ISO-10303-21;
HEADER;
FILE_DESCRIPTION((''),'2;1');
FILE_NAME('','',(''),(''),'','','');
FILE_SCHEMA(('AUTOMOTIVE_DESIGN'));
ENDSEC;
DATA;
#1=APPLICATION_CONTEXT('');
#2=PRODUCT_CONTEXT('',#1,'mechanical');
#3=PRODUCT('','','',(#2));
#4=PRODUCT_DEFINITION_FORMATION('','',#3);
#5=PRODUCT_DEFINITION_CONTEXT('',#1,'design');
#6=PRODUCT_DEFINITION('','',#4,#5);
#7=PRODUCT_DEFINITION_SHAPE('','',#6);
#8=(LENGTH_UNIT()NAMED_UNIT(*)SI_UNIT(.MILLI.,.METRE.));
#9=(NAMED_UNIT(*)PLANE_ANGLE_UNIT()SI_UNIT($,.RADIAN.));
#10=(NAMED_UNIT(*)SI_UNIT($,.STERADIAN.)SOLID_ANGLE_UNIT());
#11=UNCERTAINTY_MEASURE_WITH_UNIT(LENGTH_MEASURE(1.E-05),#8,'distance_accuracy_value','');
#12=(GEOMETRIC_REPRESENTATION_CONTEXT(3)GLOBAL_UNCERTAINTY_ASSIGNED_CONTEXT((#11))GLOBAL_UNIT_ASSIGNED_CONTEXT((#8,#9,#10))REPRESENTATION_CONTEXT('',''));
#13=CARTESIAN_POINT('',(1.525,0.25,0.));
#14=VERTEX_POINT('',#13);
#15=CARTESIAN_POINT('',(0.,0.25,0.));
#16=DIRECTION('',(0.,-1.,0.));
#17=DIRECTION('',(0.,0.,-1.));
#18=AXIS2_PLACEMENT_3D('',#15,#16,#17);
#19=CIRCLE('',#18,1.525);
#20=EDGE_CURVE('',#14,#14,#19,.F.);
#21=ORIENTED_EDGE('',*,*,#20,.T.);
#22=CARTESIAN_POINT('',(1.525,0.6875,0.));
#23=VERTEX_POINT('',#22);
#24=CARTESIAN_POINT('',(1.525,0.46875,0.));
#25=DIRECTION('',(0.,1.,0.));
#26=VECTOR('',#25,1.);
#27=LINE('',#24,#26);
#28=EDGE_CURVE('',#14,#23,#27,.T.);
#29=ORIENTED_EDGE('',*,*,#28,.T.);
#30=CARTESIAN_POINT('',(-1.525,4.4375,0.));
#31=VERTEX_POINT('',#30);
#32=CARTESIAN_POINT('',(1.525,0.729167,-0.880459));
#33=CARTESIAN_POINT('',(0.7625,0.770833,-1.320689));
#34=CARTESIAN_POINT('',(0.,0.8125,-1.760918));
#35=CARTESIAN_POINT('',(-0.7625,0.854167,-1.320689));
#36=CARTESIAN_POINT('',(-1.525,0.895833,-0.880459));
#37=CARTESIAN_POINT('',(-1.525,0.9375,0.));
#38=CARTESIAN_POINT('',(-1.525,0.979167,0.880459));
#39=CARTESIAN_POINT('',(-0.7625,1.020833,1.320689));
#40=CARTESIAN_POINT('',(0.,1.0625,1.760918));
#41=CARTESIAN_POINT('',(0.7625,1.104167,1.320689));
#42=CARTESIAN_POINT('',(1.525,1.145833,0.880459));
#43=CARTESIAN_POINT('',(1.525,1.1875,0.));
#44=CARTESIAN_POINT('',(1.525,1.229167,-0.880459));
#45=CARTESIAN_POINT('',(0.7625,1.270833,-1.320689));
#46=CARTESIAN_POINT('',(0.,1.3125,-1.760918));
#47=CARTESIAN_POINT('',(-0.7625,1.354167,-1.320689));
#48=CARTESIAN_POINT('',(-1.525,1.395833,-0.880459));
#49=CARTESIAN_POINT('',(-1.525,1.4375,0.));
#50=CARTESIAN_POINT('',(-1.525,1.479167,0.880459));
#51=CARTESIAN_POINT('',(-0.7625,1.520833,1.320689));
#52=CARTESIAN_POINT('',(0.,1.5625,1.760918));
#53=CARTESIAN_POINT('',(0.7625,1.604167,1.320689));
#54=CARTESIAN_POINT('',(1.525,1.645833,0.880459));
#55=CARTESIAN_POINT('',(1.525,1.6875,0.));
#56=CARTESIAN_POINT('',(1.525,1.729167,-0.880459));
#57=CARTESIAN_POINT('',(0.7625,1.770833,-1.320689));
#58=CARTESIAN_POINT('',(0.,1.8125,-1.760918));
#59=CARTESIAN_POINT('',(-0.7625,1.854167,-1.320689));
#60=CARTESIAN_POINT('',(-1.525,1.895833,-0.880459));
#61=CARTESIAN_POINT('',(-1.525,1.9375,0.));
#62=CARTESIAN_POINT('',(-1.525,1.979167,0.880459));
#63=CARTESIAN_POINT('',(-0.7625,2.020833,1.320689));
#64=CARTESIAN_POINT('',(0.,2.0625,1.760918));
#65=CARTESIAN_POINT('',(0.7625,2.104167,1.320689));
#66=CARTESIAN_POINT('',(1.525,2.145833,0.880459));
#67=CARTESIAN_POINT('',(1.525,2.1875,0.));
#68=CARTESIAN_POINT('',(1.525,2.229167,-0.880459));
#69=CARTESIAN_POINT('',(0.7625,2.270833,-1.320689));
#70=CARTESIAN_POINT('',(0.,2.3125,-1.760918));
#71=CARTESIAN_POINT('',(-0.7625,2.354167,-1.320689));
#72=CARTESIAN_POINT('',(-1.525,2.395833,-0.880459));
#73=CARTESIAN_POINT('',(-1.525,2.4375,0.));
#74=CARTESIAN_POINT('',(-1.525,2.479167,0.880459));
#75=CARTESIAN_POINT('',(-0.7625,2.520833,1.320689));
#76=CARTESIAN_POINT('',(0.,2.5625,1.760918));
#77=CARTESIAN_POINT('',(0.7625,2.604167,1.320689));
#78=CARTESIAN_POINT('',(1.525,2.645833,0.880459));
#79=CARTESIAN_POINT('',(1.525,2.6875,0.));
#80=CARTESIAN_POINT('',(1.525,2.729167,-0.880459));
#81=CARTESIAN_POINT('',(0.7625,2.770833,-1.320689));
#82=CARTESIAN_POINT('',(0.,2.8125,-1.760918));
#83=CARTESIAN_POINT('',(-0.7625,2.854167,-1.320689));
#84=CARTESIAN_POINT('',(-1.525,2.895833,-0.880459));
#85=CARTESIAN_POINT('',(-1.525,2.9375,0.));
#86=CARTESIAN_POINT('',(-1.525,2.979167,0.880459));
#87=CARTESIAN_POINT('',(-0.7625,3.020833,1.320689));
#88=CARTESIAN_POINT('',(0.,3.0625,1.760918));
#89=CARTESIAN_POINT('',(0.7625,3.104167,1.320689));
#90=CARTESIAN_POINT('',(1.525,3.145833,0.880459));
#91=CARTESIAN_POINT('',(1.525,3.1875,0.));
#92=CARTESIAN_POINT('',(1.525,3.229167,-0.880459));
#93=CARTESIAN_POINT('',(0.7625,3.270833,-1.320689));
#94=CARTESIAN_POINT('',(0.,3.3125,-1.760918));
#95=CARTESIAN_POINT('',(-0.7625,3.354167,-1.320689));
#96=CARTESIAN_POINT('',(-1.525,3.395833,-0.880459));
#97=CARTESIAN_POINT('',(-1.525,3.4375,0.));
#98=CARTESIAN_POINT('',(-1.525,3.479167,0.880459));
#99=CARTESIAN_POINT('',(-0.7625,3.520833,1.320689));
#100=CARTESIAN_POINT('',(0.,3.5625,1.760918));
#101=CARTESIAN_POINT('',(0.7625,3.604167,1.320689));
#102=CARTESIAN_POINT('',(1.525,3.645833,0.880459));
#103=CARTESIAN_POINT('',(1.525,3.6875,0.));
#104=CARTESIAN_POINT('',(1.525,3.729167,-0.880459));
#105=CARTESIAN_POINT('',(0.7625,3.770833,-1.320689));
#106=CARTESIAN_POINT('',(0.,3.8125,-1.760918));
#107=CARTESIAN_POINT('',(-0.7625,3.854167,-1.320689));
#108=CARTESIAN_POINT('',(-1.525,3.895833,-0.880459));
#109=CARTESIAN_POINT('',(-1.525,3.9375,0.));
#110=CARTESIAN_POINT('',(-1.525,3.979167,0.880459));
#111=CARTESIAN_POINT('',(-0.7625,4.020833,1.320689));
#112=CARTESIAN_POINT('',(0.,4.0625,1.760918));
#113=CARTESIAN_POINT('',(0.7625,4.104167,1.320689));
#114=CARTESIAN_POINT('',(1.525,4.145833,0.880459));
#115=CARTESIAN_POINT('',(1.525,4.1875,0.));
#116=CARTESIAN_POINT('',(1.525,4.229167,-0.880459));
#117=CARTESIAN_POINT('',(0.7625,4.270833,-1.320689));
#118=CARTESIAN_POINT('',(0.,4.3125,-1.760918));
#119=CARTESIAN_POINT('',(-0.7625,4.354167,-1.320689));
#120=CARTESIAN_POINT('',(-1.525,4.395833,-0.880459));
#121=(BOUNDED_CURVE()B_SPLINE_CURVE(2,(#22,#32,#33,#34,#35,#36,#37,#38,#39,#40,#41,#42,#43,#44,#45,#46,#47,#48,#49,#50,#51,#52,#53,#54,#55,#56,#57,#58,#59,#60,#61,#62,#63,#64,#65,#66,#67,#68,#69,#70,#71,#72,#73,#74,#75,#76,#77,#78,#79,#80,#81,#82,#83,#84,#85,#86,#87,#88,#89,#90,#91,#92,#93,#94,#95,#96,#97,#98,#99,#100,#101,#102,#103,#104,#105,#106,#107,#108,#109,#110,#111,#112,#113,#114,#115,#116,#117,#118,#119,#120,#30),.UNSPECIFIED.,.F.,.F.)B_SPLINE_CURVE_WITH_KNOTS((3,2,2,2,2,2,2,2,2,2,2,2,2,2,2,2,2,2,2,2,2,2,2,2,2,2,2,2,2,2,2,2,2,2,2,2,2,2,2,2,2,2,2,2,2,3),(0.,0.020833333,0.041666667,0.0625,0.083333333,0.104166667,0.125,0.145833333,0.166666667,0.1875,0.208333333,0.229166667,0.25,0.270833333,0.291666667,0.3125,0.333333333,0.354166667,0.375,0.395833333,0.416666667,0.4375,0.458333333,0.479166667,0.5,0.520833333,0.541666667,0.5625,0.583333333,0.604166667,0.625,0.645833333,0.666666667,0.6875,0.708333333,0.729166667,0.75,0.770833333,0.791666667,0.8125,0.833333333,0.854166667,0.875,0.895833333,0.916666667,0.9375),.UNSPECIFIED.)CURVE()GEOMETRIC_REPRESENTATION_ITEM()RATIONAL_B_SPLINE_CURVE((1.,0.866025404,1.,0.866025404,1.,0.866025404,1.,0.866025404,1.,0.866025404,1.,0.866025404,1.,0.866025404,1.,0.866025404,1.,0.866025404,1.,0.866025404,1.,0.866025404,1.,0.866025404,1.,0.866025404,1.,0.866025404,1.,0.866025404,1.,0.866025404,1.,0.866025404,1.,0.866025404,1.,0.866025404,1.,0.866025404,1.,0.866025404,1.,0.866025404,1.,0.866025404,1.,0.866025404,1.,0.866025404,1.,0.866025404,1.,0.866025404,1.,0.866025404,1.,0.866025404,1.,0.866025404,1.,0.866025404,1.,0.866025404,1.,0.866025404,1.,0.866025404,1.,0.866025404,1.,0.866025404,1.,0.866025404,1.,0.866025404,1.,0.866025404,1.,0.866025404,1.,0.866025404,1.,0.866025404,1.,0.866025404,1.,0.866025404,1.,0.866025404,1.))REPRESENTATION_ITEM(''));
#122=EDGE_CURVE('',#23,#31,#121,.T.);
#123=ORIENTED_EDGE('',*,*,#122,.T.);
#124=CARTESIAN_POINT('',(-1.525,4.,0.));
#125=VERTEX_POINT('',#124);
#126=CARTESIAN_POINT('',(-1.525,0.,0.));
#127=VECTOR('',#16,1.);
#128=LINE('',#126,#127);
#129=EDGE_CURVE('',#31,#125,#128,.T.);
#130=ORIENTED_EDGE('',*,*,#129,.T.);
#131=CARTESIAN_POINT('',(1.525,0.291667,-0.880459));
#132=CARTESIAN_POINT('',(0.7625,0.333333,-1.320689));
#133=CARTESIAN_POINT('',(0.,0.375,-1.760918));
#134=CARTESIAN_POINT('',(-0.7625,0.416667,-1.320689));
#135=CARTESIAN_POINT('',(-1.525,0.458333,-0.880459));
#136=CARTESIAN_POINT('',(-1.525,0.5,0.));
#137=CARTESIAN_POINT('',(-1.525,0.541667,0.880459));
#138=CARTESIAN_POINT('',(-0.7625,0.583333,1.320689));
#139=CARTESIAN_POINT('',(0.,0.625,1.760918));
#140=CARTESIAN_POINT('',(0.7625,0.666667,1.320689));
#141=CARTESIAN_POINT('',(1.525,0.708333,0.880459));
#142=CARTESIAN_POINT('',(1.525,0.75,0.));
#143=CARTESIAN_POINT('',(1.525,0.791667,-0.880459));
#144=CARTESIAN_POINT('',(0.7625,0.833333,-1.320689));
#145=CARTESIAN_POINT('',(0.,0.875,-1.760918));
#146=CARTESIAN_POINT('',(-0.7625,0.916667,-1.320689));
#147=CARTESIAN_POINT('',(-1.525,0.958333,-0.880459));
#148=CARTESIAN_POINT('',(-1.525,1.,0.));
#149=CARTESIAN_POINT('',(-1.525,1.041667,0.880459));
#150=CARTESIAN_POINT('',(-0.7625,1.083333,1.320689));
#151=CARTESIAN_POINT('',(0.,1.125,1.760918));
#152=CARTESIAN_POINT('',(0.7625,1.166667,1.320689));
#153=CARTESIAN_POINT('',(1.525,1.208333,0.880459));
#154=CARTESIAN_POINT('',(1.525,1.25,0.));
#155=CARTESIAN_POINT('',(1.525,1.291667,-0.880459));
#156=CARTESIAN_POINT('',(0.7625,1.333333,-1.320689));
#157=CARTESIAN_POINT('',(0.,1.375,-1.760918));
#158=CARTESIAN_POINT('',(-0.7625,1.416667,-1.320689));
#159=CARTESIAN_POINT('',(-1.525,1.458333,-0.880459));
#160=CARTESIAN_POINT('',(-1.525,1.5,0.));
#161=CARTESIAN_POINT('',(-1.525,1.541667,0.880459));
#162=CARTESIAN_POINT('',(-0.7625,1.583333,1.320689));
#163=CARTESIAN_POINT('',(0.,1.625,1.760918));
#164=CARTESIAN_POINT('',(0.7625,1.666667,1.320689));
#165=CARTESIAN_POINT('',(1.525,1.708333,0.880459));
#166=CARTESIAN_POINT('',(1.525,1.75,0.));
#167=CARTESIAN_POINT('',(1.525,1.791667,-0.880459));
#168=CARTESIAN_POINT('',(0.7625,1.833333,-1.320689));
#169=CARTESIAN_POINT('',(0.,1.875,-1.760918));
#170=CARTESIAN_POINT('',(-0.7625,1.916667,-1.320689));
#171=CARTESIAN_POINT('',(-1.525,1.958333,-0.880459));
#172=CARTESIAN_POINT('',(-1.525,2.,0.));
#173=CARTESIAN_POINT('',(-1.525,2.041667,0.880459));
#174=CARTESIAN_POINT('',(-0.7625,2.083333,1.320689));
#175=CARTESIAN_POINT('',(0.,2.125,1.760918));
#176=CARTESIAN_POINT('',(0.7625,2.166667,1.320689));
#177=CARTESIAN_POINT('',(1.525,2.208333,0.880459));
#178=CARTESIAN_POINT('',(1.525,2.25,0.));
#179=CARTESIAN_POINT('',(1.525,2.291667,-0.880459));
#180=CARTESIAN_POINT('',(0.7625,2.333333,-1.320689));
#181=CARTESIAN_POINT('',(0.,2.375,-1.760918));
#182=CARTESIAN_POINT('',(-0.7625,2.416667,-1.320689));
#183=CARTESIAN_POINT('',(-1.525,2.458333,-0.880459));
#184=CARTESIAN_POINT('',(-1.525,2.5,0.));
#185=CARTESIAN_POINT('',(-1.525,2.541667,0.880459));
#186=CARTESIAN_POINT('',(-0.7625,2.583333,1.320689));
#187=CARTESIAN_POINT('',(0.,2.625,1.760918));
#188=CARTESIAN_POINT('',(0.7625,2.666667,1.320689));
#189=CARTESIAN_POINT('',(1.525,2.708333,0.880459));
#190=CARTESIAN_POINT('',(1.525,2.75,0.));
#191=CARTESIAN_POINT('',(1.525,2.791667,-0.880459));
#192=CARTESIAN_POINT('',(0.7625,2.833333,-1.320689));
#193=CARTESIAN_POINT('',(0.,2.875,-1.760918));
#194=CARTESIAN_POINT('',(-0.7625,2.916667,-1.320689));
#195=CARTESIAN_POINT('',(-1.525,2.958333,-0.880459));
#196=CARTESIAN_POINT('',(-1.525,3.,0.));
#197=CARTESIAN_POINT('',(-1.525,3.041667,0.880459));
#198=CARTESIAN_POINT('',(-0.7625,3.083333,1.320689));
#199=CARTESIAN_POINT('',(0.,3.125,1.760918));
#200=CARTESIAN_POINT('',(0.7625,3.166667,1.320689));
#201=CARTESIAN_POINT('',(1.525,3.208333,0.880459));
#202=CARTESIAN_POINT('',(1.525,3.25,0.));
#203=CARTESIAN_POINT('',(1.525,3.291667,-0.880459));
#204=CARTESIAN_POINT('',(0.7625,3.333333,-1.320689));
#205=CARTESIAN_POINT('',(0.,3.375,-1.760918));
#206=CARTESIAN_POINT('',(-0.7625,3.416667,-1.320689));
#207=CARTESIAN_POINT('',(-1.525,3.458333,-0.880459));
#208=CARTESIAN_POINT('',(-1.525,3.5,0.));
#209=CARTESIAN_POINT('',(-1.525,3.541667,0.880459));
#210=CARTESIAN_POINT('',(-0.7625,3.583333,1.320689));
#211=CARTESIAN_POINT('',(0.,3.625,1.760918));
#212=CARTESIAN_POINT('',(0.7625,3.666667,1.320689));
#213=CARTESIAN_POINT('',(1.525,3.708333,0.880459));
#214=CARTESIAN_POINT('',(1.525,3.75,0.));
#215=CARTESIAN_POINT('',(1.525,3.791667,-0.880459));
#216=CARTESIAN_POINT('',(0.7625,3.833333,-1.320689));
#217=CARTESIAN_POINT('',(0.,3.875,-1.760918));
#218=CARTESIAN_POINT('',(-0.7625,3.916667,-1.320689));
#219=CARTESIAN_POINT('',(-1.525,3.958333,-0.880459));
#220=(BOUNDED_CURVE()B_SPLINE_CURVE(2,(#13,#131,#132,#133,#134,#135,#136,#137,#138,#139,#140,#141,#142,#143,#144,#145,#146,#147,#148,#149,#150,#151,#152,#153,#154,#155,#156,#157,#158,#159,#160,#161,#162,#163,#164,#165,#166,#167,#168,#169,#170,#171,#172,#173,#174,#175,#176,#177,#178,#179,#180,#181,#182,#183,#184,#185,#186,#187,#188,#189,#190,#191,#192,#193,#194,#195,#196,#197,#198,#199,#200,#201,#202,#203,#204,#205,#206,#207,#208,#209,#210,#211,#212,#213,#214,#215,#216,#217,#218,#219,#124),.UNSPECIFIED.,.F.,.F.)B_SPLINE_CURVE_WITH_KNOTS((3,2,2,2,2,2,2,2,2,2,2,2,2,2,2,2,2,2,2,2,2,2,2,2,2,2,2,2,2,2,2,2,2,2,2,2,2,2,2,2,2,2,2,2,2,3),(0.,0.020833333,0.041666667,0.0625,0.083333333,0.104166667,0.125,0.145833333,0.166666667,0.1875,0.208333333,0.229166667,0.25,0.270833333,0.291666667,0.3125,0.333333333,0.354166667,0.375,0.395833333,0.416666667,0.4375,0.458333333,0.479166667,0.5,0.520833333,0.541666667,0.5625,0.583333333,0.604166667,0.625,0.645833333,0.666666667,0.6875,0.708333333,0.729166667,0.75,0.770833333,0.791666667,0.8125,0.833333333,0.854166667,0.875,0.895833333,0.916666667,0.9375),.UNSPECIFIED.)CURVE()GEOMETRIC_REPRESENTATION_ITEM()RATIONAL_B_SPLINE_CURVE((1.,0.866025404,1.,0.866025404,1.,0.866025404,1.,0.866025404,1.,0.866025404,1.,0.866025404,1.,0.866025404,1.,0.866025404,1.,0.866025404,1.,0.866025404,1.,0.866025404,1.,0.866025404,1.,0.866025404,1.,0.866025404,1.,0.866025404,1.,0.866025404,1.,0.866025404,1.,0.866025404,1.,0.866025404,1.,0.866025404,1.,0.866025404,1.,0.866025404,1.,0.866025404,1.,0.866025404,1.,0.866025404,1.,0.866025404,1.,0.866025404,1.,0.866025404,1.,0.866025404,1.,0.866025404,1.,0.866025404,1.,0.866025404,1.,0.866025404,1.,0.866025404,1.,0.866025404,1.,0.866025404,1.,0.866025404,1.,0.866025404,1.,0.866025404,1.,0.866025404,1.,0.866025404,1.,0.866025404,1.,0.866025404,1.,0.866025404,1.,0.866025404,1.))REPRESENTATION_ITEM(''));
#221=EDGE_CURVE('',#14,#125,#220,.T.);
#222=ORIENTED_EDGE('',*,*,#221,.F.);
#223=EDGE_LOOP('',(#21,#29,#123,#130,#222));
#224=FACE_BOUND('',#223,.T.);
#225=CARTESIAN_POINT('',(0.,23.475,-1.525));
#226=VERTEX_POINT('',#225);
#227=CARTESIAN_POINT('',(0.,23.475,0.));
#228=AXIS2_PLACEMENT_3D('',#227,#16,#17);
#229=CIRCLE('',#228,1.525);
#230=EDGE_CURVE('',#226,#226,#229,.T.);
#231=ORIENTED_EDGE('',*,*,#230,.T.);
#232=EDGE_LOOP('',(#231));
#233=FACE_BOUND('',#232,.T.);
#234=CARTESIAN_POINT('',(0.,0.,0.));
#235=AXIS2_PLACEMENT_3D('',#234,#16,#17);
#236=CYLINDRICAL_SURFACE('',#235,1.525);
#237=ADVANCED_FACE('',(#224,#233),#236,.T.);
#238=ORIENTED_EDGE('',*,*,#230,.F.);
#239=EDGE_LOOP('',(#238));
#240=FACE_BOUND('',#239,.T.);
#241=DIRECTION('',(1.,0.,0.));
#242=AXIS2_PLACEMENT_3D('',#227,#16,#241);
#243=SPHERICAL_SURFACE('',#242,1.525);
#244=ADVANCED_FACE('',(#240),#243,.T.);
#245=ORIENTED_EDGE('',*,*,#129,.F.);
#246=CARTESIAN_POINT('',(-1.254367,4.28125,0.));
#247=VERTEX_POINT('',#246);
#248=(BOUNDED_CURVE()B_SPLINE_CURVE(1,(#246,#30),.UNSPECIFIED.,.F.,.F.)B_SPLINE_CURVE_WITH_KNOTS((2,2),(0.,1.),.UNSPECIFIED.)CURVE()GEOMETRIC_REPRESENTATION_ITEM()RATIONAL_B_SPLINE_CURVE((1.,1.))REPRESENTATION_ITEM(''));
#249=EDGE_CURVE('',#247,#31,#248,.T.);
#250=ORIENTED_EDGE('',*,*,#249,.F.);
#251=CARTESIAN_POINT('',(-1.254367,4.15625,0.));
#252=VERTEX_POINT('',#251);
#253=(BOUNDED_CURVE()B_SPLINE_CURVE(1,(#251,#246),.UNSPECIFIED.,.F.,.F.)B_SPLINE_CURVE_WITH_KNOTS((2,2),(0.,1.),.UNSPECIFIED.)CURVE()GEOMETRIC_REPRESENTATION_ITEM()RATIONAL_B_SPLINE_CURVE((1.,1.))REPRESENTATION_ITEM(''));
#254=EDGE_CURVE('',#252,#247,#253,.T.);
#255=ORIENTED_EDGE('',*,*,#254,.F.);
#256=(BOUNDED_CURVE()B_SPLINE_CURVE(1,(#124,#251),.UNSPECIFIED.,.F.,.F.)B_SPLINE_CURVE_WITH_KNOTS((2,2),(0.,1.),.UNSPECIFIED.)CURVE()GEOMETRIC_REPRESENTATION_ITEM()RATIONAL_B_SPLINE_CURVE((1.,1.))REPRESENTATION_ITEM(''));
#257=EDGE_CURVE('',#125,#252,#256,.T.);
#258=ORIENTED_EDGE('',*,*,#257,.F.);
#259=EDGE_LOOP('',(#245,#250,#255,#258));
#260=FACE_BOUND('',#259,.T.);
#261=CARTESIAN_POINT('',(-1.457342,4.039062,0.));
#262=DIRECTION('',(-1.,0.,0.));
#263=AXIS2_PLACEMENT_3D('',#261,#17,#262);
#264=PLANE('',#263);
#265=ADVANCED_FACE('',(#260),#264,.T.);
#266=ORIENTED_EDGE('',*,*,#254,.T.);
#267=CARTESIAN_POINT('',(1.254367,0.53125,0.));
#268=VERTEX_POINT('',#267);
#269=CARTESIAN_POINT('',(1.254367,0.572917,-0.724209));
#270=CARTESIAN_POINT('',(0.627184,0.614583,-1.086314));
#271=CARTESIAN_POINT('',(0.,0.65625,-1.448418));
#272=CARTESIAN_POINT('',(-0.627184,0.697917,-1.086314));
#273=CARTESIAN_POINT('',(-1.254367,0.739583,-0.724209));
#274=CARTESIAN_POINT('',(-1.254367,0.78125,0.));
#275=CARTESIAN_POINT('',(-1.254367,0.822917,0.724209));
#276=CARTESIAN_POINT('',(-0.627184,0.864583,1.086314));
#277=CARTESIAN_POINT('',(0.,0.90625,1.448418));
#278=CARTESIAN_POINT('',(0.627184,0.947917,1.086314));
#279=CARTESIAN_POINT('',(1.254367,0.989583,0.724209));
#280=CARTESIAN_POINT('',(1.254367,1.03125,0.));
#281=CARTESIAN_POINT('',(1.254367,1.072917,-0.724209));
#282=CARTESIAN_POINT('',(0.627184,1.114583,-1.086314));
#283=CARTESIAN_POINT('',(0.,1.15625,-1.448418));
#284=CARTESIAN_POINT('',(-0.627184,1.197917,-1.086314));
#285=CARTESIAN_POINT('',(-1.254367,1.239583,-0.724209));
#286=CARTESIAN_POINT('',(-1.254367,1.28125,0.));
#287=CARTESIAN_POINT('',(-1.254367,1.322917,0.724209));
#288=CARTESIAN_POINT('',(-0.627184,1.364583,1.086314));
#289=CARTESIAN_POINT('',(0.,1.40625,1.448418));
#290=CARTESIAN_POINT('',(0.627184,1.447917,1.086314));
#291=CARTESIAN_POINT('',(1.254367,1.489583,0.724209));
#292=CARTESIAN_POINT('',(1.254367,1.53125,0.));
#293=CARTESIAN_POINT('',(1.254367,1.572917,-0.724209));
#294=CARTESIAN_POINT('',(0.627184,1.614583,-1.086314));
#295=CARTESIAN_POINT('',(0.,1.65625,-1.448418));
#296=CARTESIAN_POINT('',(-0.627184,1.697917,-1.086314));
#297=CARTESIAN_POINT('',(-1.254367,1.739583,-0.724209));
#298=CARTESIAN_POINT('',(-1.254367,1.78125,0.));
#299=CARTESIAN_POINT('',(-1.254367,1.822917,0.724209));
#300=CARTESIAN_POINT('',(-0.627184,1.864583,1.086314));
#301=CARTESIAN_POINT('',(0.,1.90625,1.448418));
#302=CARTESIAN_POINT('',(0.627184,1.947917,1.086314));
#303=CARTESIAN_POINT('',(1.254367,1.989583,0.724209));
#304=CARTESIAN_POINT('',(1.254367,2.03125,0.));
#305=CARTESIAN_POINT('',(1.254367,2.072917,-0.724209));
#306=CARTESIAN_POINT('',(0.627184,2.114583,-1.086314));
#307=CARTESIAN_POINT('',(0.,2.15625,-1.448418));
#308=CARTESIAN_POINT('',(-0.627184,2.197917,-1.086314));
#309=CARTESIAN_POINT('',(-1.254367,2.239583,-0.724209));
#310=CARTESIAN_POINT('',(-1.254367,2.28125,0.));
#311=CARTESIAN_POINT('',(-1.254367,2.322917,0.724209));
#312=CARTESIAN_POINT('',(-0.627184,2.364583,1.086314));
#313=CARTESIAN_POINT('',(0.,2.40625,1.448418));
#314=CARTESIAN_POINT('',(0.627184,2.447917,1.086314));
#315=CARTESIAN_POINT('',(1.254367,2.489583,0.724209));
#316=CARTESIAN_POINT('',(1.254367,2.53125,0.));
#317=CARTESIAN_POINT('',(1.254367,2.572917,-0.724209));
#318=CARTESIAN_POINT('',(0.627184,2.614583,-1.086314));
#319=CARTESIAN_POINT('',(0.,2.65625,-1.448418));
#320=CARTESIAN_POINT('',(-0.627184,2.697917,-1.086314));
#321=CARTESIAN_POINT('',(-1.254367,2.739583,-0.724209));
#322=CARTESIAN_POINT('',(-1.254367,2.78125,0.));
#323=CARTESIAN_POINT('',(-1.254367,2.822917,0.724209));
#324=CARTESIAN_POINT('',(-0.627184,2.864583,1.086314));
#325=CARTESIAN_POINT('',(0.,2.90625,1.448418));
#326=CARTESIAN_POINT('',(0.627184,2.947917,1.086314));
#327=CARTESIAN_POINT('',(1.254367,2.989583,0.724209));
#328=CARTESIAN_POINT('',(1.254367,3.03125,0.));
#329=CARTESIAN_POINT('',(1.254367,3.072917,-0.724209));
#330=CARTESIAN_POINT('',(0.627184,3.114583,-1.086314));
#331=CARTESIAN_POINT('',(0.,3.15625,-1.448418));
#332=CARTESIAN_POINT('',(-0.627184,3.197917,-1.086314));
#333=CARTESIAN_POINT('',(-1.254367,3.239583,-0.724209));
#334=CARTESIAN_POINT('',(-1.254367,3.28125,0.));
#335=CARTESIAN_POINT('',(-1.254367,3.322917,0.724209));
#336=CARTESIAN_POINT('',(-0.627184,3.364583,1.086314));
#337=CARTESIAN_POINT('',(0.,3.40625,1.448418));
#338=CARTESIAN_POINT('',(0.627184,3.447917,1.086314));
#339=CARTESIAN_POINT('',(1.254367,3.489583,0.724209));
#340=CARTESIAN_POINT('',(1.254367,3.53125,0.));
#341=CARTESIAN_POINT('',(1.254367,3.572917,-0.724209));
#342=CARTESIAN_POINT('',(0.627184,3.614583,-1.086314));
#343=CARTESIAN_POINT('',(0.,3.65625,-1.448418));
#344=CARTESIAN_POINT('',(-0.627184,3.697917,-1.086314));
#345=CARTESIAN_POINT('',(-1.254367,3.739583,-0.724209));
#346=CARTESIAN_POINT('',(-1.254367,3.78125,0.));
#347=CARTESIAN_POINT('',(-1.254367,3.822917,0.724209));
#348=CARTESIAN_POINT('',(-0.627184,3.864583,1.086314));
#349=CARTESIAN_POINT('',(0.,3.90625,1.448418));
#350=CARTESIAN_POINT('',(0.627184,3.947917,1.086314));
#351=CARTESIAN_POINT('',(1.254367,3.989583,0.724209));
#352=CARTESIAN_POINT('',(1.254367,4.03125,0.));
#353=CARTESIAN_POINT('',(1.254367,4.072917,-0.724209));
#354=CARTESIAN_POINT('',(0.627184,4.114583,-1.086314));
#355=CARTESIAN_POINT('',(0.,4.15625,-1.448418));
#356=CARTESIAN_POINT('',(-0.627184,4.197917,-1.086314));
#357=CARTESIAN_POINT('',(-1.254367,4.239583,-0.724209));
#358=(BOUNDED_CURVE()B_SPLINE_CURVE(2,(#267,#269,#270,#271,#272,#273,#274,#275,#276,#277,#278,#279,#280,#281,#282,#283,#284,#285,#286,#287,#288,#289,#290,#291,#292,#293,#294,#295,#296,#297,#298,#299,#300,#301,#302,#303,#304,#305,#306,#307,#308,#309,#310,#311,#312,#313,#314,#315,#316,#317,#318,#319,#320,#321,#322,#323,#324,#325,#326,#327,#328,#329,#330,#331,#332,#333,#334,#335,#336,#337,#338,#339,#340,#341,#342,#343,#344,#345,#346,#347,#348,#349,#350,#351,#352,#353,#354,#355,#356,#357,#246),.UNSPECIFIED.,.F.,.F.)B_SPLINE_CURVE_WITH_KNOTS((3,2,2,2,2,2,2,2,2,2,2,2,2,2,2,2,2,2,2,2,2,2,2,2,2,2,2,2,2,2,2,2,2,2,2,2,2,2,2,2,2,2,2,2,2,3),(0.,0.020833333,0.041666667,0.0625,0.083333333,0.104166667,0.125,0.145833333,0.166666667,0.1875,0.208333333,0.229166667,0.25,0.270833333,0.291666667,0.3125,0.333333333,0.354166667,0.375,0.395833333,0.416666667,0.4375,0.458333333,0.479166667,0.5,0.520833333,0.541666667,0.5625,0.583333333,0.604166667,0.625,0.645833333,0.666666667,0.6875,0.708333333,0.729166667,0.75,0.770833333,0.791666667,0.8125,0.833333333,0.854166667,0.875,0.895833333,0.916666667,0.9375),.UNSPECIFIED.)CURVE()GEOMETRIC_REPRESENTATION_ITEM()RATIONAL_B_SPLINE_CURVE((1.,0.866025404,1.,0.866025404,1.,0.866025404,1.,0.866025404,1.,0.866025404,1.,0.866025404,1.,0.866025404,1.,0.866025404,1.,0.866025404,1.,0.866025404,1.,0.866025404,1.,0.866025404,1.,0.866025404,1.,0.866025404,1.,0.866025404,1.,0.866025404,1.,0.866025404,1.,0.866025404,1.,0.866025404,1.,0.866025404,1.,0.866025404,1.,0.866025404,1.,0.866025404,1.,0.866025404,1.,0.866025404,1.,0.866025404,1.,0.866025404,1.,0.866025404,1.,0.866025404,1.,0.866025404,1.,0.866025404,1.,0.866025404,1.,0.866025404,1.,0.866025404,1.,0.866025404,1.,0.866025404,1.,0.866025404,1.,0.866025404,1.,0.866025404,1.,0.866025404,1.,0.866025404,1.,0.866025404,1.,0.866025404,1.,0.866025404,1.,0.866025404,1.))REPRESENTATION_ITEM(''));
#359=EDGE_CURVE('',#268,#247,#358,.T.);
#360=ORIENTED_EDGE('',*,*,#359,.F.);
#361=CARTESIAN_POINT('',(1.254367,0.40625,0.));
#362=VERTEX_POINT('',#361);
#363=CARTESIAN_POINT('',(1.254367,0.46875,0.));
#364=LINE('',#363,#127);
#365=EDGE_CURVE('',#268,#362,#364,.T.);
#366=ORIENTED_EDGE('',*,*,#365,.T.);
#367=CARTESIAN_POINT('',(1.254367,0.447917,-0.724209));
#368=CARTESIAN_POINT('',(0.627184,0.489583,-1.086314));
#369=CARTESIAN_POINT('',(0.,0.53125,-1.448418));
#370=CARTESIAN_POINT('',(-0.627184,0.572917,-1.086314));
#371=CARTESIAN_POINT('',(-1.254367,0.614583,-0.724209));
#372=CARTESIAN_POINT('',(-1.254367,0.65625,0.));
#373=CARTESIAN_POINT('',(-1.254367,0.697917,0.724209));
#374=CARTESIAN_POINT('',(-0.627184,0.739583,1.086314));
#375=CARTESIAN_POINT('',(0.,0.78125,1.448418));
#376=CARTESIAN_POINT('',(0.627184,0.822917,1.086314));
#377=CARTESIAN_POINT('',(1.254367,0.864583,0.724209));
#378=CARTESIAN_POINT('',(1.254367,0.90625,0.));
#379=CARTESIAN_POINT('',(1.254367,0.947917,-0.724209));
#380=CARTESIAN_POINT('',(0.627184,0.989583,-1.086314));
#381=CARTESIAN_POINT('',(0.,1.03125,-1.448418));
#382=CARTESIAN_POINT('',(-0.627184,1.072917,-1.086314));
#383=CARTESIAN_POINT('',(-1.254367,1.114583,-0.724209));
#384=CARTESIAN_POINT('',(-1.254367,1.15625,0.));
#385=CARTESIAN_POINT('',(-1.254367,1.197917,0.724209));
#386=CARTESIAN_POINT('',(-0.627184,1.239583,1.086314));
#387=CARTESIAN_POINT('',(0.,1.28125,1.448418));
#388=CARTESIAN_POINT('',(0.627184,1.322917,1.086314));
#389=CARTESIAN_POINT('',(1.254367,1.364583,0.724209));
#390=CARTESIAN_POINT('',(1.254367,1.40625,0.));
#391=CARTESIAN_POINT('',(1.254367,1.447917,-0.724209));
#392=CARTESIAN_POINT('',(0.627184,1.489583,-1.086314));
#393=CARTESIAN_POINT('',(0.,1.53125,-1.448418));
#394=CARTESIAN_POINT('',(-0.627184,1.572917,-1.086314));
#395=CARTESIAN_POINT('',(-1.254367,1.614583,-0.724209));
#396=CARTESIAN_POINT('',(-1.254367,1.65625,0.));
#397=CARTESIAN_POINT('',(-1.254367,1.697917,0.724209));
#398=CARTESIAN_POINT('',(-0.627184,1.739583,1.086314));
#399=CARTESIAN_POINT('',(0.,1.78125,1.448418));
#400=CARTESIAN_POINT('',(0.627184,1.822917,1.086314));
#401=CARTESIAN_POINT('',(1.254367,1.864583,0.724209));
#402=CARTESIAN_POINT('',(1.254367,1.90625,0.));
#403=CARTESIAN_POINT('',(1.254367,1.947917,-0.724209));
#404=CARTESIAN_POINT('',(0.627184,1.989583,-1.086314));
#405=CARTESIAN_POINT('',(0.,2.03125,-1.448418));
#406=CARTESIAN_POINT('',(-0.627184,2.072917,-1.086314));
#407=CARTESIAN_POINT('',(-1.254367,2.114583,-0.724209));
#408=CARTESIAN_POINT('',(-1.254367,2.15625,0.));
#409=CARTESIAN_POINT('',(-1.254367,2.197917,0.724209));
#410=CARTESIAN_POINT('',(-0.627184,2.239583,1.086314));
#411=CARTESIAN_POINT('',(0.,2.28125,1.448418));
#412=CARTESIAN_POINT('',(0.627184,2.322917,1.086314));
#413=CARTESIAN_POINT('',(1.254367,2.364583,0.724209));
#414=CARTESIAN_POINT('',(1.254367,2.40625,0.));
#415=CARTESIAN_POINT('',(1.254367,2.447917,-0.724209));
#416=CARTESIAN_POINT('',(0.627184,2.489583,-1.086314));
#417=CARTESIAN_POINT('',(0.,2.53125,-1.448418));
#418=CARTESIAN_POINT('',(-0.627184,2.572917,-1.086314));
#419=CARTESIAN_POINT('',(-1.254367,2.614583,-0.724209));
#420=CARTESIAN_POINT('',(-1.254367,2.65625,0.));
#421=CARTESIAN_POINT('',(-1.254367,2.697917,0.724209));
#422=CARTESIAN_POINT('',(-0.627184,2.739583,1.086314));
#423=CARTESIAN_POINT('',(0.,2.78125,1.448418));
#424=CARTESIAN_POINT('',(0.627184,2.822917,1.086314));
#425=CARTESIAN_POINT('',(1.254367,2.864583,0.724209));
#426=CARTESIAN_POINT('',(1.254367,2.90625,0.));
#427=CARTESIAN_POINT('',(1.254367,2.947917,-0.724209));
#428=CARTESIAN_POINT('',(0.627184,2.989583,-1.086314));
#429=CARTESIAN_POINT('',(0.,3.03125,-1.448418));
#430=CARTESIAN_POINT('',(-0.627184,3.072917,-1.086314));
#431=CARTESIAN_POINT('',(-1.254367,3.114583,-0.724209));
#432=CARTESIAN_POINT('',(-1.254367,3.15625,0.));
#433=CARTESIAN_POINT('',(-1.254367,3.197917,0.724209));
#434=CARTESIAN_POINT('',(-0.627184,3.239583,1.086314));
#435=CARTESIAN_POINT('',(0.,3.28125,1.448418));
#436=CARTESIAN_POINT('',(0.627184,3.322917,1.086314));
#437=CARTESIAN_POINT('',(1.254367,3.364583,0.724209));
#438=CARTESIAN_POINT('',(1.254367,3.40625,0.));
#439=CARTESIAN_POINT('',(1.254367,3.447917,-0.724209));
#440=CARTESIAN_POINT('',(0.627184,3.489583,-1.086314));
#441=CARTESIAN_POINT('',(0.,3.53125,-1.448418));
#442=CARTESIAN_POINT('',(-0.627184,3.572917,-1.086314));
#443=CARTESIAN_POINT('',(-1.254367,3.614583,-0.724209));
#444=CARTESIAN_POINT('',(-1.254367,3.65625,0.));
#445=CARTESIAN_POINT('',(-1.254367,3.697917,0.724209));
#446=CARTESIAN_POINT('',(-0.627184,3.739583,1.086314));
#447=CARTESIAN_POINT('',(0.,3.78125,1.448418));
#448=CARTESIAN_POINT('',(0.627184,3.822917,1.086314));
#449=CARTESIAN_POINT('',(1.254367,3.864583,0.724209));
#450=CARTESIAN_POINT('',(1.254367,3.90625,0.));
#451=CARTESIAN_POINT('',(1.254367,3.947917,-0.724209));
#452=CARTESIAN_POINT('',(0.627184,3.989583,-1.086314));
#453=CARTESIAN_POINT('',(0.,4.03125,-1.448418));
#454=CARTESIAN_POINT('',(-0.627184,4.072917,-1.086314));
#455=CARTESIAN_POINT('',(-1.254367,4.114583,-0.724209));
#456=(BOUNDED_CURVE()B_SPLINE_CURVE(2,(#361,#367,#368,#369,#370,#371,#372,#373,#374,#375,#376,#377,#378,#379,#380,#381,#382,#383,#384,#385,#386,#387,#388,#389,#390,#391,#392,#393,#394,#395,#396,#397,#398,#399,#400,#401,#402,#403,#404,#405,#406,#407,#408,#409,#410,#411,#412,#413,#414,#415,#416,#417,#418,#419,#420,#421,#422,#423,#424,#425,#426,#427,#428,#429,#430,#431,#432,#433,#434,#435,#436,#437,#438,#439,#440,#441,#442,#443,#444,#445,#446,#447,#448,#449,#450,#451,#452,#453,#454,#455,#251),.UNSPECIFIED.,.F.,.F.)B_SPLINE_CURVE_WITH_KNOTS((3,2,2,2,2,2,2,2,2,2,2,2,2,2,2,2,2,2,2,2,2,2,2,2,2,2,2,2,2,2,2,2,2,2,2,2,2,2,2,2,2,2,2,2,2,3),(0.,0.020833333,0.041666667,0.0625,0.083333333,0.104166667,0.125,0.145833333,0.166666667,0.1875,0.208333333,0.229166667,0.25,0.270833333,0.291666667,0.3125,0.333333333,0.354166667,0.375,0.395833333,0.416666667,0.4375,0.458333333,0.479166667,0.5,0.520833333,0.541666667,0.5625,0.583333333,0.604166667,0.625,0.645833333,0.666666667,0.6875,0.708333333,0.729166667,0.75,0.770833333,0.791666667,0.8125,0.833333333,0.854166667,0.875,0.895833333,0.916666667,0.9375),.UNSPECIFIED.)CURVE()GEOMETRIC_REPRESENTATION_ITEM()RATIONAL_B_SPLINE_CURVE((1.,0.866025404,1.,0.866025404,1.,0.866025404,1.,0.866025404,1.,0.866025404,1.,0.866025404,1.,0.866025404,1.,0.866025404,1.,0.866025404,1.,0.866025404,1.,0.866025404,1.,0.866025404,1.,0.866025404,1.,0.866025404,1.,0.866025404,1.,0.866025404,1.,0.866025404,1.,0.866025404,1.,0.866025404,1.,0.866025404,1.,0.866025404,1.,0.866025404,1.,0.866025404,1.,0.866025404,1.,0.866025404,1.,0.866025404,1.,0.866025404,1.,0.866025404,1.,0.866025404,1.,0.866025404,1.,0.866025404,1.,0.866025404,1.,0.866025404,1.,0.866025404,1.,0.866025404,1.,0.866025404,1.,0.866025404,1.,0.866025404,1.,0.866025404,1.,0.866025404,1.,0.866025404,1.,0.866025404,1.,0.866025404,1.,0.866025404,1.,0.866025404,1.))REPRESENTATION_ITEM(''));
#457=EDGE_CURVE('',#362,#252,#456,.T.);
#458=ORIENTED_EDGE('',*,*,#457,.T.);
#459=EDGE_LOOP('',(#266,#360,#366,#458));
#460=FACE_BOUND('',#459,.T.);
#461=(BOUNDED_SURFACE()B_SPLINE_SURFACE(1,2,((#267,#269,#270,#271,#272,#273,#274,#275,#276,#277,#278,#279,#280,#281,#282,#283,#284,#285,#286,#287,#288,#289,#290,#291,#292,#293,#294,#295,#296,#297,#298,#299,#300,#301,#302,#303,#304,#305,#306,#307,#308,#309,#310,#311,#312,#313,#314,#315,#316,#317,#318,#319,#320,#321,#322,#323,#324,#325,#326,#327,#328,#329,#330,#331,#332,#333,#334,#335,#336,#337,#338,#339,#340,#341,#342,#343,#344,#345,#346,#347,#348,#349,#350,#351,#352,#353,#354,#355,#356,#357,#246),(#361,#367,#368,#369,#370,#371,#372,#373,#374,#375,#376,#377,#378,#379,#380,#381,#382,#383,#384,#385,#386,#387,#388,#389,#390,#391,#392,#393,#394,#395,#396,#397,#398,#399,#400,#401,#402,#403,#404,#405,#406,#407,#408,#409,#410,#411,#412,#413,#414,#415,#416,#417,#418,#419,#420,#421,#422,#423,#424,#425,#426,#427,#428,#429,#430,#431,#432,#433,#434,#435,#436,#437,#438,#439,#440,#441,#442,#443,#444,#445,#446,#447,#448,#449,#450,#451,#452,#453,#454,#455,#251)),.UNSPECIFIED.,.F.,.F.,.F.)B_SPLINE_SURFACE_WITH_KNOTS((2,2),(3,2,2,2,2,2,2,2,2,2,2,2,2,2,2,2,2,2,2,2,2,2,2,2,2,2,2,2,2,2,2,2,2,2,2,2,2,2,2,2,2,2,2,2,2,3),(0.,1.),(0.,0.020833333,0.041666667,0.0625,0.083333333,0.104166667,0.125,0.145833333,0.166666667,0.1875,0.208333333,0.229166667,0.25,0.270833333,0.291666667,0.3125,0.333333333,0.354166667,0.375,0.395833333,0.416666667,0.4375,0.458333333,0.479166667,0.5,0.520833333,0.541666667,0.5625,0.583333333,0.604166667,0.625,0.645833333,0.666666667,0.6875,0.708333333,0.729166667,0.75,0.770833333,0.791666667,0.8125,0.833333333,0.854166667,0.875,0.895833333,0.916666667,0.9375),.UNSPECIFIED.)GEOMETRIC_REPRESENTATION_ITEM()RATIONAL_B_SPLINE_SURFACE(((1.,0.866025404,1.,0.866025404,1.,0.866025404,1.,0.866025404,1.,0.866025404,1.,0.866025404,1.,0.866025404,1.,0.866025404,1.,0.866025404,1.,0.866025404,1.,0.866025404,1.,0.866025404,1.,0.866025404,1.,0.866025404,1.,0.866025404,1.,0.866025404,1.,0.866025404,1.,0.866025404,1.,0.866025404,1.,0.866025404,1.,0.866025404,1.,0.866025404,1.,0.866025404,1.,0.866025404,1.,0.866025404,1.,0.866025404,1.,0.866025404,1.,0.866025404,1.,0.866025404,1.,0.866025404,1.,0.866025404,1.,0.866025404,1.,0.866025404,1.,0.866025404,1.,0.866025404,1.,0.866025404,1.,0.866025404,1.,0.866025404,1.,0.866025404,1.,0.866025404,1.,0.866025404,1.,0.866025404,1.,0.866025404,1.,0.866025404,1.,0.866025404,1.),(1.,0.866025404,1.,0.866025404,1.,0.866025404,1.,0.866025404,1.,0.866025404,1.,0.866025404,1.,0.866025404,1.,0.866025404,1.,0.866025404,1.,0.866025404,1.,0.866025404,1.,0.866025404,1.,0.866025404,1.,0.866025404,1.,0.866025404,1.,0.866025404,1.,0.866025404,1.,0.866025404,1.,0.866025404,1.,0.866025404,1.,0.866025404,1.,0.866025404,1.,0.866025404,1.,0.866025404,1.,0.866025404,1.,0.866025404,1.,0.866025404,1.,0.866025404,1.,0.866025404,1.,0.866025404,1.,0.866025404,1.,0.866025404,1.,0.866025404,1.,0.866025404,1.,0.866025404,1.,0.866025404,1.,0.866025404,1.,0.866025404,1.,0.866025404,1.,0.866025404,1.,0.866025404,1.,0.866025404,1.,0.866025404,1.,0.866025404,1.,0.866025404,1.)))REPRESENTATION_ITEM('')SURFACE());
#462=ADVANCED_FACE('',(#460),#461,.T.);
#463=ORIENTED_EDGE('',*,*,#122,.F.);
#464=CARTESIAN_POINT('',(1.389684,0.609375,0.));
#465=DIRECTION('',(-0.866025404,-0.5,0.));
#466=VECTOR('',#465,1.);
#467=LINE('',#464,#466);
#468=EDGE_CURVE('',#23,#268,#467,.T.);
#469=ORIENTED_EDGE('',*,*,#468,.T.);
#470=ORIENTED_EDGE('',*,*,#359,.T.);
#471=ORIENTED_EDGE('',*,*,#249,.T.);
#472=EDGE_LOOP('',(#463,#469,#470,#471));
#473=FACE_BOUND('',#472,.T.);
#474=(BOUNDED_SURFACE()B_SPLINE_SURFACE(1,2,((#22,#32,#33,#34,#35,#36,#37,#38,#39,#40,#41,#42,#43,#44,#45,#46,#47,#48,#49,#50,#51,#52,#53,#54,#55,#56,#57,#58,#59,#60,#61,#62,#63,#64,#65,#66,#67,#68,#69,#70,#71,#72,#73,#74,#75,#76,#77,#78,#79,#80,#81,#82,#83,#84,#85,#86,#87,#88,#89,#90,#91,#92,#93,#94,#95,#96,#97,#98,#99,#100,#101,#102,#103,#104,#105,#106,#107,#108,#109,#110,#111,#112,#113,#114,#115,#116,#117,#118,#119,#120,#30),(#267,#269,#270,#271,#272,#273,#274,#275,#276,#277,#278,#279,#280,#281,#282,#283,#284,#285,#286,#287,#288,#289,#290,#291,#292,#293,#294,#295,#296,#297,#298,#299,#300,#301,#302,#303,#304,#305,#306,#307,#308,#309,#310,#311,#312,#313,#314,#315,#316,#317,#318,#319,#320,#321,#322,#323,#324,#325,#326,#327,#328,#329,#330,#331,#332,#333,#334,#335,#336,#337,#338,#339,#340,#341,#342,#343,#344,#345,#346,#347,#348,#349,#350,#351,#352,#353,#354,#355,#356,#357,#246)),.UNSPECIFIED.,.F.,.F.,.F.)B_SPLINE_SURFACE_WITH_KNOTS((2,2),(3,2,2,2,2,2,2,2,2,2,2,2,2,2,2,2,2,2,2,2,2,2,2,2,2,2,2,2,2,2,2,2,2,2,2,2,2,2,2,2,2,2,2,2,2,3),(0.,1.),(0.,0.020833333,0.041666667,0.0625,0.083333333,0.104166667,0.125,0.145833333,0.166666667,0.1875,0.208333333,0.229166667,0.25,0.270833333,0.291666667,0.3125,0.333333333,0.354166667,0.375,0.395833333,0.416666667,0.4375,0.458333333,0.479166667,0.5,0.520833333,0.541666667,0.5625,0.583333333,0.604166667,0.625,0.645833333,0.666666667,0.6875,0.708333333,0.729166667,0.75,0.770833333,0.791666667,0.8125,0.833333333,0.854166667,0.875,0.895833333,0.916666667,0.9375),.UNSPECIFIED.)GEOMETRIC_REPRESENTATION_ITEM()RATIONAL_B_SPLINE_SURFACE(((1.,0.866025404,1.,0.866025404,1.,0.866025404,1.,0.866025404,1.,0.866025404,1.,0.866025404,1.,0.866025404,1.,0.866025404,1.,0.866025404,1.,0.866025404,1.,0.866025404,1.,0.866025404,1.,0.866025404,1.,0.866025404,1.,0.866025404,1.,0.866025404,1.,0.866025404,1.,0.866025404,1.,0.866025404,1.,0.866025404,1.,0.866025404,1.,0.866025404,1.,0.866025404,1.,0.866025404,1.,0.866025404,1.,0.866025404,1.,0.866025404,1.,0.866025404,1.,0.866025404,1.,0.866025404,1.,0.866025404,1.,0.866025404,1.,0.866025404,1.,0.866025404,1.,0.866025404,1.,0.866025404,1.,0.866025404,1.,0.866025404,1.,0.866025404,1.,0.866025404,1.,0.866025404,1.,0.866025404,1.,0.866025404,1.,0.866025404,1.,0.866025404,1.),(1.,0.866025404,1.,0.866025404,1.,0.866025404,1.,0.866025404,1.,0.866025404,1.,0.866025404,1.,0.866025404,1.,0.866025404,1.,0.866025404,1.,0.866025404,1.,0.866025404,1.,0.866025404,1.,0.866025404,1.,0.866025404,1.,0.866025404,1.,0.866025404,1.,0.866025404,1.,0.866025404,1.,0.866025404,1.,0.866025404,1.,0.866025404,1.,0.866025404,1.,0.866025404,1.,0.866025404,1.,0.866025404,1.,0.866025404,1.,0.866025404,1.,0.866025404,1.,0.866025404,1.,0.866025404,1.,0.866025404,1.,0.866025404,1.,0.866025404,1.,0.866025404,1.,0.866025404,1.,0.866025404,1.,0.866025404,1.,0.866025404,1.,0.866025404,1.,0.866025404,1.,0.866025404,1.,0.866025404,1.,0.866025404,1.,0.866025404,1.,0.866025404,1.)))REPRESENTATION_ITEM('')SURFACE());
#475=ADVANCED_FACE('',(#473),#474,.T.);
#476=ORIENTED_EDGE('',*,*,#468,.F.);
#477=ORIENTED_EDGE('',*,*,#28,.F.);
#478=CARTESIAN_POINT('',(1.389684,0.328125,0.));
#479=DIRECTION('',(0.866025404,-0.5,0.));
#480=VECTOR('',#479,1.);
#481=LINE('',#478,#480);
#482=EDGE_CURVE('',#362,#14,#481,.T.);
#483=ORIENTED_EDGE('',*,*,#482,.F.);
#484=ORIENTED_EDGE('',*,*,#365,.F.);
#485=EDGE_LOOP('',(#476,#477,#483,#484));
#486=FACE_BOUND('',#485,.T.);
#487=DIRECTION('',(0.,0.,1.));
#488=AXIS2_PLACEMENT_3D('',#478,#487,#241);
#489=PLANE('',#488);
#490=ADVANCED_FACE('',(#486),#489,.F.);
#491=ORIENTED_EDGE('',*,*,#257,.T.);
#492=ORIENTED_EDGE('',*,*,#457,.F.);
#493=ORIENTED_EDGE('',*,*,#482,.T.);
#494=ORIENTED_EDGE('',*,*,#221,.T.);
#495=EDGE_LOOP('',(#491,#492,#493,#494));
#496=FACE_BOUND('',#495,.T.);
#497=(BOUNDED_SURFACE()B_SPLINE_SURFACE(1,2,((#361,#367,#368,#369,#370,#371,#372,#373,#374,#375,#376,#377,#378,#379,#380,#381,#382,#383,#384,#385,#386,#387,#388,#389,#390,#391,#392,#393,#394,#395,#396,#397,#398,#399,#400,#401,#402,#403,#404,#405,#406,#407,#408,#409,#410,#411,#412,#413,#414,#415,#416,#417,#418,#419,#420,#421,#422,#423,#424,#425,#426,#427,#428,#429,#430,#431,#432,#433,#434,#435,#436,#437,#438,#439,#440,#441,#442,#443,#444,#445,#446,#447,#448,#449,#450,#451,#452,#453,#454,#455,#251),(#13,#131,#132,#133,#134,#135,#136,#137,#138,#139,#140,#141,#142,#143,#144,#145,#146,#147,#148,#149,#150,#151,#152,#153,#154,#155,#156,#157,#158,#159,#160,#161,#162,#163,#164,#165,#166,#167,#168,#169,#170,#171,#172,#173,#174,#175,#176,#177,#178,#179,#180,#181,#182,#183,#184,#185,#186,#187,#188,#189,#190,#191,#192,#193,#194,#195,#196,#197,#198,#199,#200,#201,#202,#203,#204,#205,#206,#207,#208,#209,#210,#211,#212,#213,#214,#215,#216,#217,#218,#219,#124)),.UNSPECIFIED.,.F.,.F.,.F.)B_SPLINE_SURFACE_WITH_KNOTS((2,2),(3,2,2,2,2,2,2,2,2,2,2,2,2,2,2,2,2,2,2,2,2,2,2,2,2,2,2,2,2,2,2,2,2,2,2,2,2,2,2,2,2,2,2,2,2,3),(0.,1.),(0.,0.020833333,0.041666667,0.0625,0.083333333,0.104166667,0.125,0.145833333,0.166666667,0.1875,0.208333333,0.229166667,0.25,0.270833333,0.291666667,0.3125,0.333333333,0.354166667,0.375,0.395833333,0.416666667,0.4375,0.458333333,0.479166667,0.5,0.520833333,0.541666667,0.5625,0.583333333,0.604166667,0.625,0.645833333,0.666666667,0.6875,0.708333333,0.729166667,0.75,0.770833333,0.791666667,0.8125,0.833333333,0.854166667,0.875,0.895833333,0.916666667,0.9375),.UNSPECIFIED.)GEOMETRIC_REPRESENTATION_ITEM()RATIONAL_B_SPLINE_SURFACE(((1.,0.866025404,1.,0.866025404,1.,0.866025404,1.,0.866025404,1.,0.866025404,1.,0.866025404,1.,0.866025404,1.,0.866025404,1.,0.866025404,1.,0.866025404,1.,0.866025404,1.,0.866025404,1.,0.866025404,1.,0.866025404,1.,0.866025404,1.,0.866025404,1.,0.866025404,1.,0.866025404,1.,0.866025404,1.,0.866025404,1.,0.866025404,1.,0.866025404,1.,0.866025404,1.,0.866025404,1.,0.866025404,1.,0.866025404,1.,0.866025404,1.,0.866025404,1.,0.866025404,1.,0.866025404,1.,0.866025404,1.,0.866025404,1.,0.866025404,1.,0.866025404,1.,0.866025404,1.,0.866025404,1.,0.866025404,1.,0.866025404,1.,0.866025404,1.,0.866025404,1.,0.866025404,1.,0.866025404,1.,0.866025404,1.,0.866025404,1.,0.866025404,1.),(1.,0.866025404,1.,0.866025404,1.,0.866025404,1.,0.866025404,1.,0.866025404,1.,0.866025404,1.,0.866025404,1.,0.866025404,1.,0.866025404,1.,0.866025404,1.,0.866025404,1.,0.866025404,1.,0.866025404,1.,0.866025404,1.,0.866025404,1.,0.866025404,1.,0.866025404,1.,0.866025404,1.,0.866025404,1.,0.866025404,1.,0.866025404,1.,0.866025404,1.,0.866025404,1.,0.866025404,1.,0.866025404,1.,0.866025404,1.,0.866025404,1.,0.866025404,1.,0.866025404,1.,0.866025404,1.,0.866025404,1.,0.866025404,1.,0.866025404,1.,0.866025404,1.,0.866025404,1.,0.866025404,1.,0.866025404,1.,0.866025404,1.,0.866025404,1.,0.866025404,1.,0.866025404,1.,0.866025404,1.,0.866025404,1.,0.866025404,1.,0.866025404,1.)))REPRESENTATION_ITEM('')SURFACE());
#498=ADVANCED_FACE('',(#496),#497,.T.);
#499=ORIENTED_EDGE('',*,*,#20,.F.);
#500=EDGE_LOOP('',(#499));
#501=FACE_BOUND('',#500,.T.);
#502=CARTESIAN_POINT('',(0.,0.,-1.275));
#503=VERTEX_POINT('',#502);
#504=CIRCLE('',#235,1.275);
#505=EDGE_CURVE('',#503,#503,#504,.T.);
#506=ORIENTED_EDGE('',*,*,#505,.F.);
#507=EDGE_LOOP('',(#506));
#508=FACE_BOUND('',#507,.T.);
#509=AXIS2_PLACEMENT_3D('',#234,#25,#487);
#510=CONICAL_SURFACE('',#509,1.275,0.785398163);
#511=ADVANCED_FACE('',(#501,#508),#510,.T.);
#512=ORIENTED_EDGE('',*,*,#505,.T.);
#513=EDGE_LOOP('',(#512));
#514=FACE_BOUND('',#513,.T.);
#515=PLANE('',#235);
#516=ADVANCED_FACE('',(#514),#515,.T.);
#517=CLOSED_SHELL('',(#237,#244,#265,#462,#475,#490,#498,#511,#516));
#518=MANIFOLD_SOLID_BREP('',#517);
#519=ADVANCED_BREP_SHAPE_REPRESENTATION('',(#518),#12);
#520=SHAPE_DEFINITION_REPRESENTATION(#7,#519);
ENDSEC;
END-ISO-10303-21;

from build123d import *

# Parameters (mm, degrees)
CHAMFUR_BEFORE_THREAD_SIZE = 0.25
THREAD2_PITCH              = 0.5


with BuildPart() as part:
    # Rod Sketch → Rod Revolve (revolve)
    with BuildSketch(Plane.XY):
        with BuildLine():
            Line((0, 0), (1.525, 0))
            Line((1.525, 0), (1.525, 23.475))
            ThreePointArc((1.525, 23.475), (1.078337841, 24.553337841), (0, 25))
            Line((0, 25), (0, 0))
        make_face()
    revolve(axis=Axis((0, 0, 0), (0, 1, 0)))

    # Chamfur Before Thread
    chamfur_before_thread_edges = [part.edges().sort_by_distance(p)[0] for p in [
        (-1.525, 0, 0),
    ]]
    chamfer(chamfur_before_thread_edges, length=CHAMFUR_BEFORE_THREAD_SIZE)

    # Thread2: the profile of Thread Profile2 profile screwed along a right-hand helix of 7.5 turns, 6 arcs to a turn; built about Z, then put on its axis
    thread2_z = Axis((0, 0, 0), (0, 0, 1))
    thread2_corners = [(1.5253, 0, -0.000173205), (1.5253, 0, 0.437673204), (1.254367063, 0, 0.281249999), (1.254367062, 0, 0.156249999)]
    with BuildLine(mode=Mode.PRIVATE) as thread2_profile:
        Line(thread2_corners[0], thread2_corners[1])
        Line(thread2_corners[1], thread2_corners[2])
        Line(thread2_corners[2], thread2_corners[3])
        Line(thread2_corners[3], thread2_corners[0])
    thread2_cap = Face(thread2_profile.wire())
    thread2_turn_angles = [0, 30, 60, 90, 120, 150, 180, 210, 240, 270, 300, 330, 360]
    thread2_turn_weights = [1, 0.8660254037844387, 1, 0.8660254037844387, 1, 0.8660254037844387, 1, 0.8660254037844387, 1, 0.8660254037844387, 1, 0.8660254037844387, 1]
    thread2_turn_rails = [Edge.make_bspline([Vector(p[0], p[1], 0).rotate(thread2_z, thread2_turn_angles[k]) / thread2_turn_weights[k] + Vector(0, 0, p[2] + THREAD2_PITCH * thread2_turn_angles[k] / 360) for k in range(13)], [0, 0, 0, 1, 1, 2, 2, 3, 3, 4, 4, 5, 5, 6, 6, 6], 2, thread2_turn_weights) for p in thread2_corners]
    thread2_turn_sides = [Face.make_surface_from_curves(thread2_turn_rails[p[0]], thread2_turn_rails[p[1]]) for p in [(0, 1), (1, 2), (2, 3), (3, 0)]]
    thread2_last_angles = [2520, 2550, 2580, 2610, 2640, 2670, 2700]
    thread2_last_weights = [1, 0.8660254037844387, 1, 0.8660254037844387, 1, 0.8660254037844426, 1]
    thread2_last_rails = [Edge.make_bspline([Vector(p[0], p[1], 0).rotate(thread2_z, thread2_last_angles[k]) / thread2_last_weights[k] + Vector(0, 0, p[2] + THREAD2_PITCH * thread2_last_angles[k] / 360) for k in range(7)], [0, 0, 0, 1, 1, 2, 2, 3, 3, 3], 2, thread2_last_weights) for p in thread2_corners]
    thread2_last_sides = [Face.make_surface_from_curves(thread2_last_rails[p[0]], thread2_last_rails[p[1]]) for p in [(0, 1), (1, 2), (2, 3), (3, 0)]]
    thread2 = Plane(origin=(0, 0.25, 0), x_dir=(1, 0, 0), z_dir=(0, 1, 0)) * Solid(Shell([*[p.moved(Location((0, 0, THREAD2_PITCH * i))) for i in range(7) for p in thread2_turn_sides], *thread2_last_sides, thread2_cap, thread2_cap.rotate(thread2_z, 2700).moved(Location((0, 0, THREAD2_PITCH * 2700 / 360)))]))
    add(thread2, mode=Mode.SUBTRACT)


solid = part.part
